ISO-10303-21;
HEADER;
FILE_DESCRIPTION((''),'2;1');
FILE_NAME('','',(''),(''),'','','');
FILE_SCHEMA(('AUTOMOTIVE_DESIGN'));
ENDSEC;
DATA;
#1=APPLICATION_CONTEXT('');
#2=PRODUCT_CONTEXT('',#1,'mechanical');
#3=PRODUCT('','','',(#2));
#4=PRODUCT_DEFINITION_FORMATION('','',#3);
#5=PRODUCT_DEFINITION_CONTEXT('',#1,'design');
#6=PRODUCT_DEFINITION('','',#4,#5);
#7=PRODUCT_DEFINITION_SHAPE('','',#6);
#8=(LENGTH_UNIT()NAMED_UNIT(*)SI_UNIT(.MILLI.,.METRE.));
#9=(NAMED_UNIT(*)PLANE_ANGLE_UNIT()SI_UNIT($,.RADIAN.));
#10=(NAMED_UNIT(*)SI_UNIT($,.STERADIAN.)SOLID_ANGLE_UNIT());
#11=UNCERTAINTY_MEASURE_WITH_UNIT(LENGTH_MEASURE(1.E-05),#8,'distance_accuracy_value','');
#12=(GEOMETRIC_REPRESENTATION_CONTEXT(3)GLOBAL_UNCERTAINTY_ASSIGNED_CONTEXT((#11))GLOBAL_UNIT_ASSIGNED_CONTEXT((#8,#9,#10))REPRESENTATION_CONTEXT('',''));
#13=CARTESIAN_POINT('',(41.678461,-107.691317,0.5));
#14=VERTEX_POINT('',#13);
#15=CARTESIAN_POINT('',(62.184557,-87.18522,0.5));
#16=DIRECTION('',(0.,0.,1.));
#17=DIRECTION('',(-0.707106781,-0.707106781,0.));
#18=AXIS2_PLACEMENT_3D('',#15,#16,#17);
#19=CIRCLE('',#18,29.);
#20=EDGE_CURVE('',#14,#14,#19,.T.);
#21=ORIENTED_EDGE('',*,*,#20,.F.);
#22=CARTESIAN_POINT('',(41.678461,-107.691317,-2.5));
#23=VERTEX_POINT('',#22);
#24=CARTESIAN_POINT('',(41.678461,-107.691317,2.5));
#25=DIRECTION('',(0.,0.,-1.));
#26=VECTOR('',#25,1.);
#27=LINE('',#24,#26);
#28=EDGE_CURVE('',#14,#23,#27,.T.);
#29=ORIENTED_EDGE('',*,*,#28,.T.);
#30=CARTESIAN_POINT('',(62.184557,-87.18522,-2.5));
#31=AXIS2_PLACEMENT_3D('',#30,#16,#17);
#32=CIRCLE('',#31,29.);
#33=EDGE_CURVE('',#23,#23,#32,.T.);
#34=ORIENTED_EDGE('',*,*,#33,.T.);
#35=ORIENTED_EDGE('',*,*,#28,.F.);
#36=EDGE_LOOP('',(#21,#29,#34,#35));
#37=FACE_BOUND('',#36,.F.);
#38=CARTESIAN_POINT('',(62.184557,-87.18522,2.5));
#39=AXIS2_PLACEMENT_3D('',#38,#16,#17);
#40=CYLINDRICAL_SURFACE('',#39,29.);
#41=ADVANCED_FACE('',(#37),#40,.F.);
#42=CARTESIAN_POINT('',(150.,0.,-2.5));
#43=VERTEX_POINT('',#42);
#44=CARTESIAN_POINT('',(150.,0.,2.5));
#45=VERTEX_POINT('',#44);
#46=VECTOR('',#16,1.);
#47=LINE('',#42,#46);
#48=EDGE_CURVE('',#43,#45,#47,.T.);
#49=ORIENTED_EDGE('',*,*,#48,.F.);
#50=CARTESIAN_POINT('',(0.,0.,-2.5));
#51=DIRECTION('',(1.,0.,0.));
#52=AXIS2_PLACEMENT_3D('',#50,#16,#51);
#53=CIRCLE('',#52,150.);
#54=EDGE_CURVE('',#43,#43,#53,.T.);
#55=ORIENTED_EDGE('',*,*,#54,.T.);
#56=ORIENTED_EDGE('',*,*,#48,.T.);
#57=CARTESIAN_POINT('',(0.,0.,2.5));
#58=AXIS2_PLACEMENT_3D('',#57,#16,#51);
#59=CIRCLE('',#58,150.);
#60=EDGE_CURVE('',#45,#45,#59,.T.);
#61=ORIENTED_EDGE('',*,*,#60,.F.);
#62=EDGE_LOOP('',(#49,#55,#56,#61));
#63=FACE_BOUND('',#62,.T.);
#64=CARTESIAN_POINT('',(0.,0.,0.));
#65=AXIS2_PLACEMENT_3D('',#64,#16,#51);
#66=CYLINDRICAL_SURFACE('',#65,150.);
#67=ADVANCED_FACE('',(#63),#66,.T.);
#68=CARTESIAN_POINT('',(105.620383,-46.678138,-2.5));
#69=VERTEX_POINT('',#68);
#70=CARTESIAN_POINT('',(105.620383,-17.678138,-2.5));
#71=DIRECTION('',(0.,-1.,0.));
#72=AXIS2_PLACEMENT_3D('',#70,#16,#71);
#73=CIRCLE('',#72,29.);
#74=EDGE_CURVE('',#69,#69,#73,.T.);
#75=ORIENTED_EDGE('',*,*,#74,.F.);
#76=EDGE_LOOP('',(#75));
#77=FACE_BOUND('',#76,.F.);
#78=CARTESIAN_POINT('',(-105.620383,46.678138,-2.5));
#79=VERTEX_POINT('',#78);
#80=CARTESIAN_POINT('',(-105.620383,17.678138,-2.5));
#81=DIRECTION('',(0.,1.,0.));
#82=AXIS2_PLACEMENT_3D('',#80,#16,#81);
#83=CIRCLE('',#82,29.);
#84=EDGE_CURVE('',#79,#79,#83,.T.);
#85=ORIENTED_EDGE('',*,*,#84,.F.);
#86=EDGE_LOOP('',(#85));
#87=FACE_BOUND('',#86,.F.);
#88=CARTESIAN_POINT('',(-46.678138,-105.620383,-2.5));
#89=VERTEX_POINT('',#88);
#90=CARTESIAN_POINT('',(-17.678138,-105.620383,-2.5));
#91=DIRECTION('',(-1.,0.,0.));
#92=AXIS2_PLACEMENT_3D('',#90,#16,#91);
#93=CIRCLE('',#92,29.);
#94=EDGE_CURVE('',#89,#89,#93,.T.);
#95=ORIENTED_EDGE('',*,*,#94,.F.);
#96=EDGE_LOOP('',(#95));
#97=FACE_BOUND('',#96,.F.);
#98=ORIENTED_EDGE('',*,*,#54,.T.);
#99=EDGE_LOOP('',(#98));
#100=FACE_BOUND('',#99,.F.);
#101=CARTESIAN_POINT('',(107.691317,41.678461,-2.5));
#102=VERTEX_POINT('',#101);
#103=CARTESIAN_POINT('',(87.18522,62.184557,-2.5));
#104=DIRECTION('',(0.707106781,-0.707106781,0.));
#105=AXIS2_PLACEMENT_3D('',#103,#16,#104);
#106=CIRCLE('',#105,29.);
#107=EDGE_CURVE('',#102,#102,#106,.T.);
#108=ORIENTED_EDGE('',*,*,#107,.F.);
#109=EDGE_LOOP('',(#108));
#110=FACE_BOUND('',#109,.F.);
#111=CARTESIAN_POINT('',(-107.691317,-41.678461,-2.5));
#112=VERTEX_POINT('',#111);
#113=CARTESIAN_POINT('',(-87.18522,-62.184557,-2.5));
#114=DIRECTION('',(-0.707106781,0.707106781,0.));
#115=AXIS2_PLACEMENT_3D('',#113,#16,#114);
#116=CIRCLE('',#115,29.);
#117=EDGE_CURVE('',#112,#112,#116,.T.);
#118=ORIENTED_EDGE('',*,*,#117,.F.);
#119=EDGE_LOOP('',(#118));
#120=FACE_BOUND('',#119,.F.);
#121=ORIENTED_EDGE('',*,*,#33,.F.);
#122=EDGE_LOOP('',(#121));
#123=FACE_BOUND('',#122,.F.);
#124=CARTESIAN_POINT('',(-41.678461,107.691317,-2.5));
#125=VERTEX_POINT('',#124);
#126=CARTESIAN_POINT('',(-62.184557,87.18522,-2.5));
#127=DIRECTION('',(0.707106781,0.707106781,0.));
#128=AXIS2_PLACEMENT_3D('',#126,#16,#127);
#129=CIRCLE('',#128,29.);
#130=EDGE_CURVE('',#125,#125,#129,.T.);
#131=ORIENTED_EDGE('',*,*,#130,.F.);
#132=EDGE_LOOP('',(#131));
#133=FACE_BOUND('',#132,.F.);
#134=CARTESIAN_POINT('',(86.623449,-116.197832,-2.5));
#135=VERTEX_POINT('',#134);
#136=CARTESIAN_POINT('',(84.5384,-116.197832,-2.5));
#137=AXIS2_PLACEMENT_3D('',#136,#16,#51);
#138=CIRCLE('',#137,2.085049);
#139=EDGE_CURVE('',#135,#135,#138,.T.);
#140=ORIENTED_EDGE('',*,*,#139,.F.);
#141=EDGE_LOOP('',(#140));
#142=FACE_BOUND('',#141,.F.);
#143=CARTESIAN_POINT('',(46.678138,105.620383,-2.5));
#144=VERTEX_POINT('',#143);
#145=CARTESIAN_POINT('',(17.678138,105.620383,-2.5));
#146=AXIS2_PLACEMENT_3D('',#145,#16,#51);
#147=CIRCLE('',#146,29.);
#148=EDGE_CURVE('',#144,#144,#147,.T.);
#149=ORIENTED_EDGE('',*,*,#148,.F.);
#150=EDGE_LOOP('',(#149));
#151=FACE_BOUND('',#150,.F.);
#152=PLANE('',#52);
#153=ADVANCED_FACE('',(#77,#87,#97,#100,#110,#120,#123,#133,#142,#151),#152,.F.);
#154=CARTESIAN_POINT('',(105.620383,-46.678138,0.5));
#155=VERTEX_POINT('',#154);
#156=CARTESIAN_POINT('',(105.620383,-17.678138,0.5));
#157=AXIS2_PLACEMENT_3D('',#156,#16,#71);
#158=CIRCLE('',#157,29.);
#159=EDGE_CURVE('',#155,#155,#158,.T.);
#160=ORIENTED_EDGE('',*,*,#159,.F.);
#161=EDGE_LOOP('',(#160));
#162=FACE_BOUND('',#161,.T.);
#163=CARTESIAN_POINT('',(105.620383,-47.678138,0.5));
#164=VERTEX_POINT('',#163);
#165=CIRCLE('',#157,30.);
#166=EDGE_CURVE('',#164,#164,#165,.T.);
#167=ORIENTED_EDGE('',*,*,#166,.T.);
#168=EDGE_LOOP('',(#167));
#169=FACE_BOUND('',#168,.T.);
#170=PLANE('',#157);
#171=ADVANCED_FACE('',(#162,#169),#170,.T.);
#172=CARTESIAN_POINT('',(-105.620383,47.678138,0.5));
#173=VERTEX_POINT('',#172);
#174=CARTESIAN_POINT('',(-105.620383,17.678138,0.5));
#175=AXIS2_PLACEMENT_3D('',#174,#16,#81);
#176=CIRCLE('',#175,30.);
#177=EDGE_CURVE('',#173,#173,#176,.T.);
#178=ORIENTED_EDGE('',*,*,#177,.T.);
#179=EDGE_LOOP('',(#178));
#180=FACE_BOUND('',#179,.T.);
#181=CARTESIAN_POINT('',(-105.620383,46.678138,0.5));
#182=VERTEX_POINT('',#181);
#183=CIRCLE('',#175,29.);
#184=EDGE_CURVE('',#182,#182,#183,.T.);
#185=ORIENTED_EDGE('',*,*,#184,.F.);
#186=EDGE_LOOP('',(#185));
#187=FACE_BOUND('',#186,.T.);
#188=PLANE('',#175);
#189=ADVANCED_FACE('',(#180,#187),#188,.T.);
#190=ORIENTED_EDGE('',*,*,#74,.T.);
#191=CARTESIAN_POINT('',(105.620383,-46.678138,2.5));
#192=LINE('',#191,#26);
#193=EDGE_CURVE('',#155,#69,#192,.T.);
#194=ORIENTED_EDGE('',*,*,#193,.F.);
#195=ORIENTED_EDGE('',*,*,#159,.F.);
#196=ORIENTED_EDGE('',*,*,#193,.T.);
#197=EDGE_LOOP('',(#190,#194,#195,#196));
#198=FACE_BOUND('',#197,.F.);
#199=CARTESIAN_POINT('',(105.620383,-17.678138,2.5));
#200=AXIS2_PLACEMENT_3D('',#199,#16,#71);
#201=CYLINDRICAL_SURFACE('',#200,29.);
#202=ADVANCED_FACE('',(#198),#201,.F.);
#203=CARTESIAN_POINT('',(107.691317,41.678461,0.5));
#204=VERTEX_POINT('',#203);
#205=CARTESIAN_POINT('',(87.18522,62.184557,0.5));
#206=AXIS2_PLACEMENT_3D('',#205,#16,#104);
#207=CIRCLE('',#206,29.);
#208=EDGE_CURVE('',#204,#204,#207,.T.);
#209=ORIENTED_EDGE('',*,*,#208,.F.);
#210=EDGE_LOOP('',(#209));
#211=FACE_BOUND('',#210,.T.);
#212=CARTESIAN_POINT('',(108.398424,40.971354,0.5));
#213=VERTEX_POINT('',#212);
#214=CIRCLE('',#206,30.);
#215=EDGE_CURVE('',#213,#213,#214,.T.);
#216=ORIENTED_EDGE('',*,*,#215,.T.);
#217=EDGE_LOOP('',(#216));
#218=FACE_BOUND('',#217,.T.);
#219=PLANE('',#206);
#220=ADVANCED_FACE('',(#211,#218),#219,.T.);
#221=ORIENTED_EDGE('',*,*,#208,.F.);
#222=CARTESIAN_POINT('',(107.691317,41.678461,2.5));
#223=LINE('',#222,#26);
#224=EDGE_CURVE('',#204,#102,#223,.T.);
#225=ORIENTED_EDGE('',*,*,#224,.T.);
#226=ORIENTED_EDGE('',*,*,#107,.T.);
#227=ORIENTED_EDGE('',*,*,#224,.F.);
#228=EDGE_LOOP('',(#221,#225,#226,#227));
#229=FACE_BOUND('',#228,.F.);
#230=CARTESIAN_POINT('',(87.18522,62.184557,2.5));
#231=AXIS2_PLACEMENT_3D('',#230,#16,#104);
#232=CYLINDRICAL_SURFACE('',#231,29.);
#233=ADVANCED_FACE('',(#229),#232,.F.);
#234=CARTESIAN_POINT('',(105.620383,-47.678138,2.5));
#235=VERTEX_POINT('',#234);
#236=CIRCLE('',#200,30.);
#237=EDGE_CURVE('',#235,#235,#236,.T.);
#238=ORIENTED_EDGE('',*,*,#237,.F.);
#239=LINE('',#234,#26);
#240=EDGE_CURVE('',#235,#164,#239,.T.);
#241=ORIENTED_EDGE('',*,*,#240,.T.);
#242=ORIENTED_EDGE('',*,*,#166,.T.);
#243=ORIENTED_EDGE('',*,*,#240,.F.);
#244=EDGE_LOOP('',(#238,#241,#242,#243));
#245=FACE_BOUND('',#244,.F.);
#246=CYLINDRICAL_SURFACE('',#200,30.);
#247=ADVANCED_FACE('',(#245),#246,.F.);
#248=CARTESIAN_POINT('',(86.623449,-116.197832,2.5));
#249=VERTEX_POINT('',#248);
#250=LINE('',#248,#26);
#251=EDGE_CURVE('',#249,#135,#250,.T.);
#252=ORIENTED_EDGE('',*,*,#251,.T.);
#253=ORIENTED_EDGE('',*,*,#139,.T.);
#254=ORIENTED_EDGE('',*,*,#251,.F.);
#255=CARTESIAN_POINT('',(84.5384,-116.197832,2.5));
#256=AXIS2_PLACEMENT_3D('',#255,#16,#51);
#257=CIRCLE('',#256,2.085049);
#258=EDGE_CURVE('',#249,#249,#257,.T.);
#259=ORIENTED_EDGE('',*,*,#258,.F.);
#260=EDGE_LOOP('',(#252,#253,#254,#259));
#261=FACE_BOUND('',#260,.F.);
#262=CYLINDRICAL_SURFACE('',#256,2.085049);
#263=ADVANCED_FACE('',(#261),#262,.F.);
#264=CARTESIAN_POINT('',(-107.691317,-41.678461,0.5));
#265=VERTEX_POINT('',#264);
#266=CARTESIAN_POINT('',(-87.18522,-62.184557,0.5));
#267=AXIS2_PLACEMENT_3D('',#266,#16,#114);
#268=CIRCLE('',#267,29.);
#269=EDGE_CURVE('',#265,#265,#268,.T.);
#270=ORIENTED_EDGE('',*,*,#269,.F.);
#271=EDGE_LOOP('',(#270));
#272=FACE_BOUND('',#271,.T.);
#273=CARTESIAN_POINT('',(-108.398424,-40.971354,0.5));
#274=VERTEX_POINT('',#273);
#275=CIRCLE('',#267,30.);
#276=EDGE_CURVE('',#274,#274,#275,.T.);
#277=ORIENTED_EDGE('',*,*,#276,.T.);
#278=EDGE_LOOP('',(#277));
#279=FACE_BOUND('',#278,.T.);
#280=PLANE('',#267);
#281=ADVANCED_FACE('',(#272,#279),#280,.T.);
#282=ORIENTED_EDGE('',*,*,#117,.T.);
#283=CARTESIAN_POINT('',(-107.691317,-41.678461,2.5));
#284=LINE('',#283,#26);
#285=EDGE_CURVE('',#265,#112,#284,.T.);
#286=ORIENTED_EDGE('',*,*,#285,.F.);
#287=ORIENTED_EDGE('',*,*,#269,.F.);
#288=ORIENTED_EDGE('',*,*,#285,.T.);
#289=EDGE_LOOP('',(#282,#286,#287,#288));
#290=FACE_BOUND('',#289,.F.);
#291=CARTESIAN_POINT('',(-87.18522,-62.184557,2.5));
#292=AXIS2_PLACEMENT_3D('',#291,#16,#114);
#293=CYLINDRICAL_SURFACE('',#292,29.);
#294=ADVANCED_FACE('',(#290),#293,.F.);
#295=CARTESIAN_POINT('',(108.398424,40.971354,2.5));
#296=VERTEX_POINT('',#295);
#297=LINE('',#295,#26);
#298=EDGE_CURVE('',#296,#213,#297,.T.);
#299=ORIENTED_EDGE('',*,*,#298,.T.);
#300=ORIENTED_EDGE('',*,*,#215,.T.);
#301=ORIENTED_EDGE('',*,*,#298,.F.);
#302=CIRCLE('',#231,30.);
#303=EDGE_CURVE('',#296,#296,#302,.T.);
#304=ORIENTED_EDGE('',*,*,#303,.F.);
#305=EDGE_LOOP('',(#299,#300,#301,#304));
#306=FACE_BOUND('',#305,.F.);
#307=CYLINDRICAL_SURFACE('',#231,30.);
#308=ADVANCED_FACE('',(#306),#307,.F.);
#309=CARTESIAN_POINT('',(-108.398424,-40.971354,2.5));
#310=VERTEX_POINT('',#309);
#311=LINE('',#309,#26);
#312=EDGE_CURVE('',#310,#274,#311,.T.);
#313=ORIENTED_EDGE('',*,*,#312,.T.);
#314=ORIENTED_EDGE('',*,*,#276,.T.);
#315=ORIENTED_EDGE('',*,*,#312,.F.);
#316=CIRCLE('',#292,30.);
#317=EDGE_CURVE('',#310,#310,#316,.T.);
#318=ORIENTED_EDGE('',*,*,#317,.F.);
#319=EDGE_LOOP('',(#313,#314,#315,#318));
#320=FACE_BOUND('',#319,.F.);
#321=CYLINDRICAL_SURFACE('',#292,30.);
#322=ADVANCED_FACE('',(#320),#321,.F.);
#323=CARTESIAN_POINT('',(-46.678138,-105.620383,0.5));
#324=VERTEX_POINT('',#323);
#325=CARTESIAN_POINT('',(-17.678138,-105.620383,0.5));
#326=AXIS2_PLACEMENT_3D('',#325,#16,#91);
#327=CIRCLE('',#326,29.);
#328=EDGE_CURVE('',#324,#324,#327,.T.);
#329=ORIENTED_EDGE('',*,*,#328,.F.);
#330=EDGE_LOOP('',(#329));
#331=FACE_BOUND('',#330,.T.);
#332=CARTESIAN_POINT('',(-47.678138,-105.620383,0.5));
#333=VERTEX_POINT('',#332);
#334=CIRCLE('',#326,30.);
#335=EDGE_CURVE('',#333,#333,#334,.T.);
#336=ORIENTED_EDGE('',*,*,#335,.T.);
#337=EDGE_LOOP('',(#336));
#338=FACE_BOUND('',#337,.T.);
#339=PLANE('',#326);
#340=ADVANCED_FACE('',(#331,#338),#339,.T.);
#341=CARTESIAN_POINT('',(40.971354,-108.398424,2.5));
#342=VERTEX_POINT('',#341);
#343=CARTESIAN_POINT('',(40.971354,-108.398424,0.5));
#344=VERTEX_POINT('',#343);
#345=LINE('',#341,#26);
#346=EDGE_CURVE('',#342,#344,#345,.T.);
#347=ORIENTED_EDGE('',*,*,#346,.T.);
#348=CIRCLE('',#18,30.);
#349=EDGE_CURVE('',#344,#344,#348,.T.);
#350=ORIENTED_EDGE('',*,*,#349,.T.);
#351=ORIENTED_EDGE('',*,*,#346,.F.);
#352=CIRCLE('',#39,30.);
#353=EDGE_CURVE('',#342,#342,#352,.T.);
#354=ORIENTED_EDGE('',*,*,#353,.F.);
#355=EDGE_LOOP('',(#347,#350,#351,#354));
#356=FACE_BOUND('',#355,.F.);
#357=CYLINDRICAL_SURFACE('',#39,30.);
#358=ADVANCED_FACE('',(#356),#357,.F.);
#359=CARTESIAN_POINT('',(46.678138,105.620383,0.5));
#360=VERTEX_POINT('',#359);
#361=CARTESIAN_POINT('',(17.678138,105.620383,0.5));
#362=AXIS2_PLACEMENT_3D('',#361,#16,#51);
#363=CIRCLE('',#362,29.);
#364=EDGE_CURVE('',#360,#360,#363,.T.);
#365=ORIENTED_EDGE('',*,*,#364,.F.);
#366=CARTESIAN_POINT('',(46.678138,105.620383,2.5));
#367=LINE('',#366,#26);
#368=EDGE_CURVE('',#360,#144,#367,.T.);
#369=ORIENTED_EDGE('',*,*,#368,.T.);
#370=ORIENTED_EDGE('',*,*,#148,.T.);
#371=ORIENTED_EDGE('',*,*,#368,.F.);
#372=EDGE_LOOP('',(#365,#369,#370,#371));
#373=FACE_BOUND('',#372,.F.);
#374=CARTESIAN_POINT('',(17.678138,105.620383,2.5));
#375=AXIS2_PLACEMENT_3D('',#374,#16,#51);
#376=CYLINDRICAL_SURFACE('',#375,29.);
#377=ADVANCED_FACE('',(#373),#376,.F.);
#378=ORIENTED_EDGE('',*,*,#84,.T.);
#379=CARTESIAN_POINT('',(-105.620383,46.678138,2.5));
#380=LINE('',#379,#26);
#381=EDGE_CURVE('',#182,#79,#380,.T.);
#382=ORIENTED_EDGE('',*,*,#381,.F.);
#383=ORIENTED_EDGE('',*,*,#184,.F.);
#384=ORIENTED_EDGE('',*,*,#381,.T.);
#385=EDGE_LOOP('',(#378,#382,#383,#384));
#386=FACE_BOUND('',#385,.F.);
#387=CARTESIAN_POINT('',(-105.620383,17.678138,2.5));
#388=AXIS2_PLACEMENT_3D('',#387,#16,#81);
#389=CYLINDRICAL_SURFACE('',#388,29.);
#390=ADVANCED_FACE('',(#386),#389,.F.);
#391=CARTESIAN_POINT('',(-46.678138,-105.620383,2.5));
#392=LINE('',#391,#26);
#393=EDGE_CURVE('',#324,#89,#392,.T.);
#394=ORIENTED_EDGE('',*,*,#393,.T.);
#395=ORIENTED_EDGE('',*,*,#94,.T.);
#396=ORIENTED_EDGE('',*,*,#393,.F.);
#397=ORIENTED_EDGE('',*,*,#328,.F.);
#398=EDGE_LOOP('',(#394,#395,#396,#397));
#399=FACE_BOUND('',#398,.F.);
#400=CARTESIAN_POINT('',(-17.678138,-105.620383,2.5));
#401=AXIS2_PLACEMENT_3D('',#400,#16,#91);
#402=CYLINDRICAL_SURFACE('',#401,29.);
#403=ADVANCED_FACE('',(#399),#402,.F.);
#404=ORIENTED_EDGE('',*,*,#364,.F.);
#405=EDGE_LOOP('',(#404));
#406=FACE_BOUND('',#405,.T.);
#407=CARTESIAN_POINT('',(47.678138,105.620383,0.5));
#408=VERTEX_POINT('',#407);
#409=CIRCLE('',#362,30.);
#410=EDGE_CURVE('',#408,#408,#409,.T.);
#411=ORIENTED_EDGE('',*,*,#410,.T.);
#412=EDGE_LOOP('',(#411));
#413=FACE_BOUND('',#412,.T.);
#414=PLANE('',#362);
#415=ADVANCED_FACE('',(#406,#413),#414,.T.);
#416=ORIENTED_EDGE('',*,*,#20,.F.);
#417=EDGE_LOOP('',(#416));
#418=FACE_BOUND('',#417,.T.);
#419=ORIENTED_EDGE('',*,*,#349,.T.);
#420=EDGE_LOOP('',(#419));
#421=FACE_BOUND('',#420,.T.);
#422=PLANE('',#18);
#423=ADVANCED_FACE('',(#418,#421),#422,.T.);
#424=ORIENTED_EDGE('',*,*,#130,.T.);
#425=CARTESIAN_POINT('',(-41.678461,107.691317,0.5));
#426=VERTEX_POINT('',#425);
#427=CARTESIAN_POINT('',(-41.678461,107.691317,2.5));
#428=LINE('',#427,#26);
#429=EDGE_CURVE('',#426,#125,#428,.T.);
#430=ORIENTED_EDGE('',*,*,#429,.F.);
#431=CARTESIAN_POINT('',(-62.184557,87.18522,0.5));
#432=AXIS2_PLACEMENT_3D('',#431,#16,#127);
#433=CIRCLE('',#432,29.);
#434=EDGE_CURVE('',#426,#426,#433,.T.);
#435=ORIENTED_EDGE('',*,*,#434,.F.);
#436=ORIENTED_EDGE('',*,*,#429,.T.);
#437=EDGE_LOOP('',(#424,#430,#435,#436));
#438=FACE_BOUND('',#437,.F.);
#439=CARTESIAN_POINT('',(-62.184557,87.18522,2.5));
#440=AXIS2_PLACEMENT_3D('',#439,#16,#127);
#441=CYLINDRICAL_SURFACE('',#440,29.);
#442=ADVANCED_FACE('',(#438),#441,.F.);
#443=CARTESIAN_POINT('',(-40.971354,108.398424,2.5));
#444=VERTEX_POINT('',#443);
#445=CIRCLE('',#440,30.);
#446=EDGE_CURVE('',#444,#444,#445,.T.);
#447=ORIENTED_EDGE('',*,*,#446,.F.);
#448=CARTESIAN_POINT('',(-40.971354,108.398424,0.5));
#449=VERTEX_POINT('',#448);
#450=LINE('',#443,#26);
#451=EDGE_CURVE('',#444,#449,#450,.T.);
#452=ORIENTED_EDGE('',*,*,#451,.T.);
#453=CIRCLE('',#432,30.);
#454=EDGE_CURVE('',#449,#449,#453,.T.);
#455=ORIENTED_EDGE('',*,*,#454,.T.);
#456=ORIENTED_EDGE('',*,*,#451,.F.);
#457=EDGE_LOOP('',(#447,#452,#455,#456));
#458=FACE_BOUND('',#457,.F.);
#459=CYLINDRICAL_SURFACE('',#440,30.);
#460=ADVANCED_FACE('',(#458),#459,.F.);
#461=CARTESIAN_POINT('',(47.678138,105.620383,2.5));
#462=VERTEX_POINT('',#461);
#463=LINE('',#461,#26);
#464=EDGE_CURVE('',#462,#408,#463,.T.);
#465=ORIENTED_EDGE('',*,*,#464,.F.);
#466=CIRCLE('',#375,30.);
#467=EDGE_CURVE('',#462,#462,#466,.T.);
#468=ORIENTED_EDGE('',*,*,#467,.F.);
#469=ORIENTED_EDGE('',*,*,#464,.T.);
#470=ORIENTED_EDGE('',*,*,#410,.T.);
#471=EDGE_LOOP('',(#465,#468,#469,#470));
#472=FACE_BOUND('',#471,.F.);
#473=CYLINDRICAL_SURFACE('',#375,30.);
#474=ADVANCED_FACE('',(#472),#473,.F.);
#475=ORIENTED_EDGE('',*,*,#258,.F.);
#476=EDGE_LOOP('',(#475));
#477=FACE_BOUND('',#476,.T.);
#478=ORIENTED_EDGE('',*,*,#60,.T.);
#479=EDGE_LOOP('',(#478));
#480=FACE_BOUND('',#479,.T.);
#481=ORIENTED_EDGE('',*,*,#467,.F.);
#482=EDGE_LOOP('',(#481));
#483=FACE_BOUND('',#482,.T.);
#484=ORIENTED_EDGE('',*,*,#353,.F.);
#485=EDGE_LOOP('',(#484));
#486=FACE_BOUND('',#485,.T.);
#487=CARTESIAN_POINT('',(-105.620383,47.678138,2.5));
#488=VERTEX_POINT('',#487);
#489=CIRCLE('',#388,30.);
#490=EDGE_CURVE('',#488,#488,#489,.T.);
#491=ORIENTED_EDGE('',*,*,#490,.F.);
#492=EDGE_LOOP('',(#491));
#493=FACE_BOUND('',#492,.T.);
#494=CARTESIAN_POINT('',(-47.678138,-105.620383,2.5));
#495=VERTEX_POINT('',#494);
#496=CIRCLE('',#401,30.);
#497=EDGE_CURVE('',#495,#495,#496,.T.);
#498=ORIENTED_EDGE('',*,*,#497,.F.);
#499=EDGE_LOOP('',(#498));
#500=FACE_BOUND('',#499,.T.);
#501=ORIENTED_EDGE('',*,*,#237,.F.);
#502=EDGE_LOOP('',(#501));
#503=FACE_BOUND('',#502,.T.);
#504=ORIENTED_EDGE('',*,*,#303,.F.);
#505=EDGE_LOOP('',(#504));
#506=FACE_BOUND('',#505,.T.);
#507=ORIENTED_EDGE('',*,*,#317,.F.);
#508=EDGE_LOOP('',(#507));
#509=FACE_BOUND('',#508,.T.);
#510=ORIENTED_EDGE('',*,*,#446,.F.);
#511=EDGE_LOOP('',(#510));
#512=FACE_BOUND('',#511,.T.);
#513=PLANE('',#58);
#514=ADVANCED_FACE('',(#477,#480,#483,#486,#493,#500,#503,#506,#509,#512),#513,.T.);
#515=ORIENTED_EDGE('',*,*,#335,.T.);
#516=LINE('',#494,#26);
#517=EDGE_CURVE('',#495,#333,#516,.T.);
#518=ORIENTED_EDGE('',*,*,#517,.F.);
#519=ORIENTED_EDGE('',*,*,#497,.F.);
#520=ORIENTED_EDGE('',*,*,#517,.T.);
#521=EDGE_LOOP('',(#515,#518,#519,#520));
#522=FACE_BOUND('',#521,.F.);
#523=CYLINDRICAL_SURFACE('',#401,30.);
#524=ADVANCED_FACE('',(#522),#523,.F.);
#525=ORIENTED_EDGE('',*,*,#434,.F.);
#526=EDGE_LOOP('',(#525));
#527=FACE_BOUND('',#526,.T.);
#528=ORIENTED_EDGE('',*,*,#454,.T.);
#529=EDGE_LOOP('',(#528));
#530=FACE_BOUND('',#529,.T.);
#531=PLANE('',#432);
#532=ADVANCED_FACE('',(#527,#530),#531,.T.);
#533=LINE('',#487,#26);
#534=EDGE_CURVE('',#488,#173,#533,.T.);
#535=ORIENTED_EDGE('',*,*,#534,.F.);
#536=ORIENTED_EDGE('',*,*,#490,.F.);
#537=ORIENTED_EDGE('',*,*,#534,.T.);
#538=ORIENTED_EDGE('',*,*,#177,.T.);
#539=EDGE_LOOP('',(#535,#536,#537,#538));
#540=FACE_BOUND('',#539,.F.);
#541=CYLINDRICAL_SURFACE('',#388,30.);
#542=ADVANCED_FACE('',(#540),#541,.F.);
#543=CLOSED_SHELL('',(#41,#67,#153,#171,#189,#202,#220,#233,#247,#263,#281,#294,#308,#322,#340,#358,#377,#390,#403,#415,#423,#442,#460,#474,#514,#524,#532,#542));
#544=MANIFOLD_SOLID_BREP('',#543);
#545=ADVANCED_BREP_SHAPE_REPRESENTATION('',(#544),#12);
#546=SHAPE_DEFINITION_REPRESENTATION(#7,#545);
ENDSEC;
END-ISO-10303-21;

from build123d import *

# Parameters (mm, degrees)
F0_R            = 150
F1_DEPTH        = 2.5
F2_R            = 29
F3_DEPTH        = 5.001
F3_COPIES_COUNT = 8
F2_R_2          = 30
F4_DEPTH        = 2
F4_COPIES_COUNT = 8
F5_R            = 2.0850492766
F6_DEPTH        = 5.001


# Not quite as in the source:
# - a pattern or mirror of a feature is missing from the dataset's text; its kind, count and spacing are read off the source's solid


with BuildPart() as f1:
    # F0 (on Top) → F1 (new body, symmetric)
    with BuildSketch(Plane.XY):
        Circle(F0_R)
    extrude(amount=F1_DEPTH, both=True)

    # F2 (on face) → F3 (cut, through all)
    with BuildSketch(Plane.XY.offset(2.5)):
        with Locations((17.6781384332, 105.6203827018)):
            Circle(F2_R)
    f3 = extrude(amount=-F3_DEPTH, mode=Mode.SUBTRACT)

    # F3_copies: F3 ×8 about axis
    f3_copies_axis = Axis((0, 0, 0), (0, 0, 1))
    for i in range(1, F3_COPIES_COUNT):
        add(f3.rotate(f3_copies_axis, i * 360 / F3_COPIES_COUNT), mode=Mode.SUBTRACT)

    # F2 (on face) → F4 (cut)
    with BuildSketch(Plane.XY.offset(2.5)):
        with Locations((17.6781384332, 105.6203827018)):
            Circle(F2_R_2)
        with Locations((17.6781384332, 105.6203827018)):
            Circle(F2_R, mode=Mode.SUBTRACT)
    f4 = extrude(amount=-F4_DEPTH, mode=Mode.SUBTRACT)

    # F4_copies: F4 ×8 about axis
    f4_copies_axis = Axis((0, 0, 0), (0, 0, 1))
    for i in range(1, F4_COPIES_COUNT):
        add(f4.rotate(f4_copies_axis, i * 360 / F4_COPIES_COUNT), mode=Mode.SUBTRACT)

    # F5 (on face) → F6 (cut, through all)
    with BuildSketch(Plane.XY.offset(2.5)):
        with Locations((84.5384001732, -116.1978319287)):
            Circle(F5_R)
    extrude(amount=-F6_DEPTH, mode=Mode.SUBTRACT)


solid = f1.part
